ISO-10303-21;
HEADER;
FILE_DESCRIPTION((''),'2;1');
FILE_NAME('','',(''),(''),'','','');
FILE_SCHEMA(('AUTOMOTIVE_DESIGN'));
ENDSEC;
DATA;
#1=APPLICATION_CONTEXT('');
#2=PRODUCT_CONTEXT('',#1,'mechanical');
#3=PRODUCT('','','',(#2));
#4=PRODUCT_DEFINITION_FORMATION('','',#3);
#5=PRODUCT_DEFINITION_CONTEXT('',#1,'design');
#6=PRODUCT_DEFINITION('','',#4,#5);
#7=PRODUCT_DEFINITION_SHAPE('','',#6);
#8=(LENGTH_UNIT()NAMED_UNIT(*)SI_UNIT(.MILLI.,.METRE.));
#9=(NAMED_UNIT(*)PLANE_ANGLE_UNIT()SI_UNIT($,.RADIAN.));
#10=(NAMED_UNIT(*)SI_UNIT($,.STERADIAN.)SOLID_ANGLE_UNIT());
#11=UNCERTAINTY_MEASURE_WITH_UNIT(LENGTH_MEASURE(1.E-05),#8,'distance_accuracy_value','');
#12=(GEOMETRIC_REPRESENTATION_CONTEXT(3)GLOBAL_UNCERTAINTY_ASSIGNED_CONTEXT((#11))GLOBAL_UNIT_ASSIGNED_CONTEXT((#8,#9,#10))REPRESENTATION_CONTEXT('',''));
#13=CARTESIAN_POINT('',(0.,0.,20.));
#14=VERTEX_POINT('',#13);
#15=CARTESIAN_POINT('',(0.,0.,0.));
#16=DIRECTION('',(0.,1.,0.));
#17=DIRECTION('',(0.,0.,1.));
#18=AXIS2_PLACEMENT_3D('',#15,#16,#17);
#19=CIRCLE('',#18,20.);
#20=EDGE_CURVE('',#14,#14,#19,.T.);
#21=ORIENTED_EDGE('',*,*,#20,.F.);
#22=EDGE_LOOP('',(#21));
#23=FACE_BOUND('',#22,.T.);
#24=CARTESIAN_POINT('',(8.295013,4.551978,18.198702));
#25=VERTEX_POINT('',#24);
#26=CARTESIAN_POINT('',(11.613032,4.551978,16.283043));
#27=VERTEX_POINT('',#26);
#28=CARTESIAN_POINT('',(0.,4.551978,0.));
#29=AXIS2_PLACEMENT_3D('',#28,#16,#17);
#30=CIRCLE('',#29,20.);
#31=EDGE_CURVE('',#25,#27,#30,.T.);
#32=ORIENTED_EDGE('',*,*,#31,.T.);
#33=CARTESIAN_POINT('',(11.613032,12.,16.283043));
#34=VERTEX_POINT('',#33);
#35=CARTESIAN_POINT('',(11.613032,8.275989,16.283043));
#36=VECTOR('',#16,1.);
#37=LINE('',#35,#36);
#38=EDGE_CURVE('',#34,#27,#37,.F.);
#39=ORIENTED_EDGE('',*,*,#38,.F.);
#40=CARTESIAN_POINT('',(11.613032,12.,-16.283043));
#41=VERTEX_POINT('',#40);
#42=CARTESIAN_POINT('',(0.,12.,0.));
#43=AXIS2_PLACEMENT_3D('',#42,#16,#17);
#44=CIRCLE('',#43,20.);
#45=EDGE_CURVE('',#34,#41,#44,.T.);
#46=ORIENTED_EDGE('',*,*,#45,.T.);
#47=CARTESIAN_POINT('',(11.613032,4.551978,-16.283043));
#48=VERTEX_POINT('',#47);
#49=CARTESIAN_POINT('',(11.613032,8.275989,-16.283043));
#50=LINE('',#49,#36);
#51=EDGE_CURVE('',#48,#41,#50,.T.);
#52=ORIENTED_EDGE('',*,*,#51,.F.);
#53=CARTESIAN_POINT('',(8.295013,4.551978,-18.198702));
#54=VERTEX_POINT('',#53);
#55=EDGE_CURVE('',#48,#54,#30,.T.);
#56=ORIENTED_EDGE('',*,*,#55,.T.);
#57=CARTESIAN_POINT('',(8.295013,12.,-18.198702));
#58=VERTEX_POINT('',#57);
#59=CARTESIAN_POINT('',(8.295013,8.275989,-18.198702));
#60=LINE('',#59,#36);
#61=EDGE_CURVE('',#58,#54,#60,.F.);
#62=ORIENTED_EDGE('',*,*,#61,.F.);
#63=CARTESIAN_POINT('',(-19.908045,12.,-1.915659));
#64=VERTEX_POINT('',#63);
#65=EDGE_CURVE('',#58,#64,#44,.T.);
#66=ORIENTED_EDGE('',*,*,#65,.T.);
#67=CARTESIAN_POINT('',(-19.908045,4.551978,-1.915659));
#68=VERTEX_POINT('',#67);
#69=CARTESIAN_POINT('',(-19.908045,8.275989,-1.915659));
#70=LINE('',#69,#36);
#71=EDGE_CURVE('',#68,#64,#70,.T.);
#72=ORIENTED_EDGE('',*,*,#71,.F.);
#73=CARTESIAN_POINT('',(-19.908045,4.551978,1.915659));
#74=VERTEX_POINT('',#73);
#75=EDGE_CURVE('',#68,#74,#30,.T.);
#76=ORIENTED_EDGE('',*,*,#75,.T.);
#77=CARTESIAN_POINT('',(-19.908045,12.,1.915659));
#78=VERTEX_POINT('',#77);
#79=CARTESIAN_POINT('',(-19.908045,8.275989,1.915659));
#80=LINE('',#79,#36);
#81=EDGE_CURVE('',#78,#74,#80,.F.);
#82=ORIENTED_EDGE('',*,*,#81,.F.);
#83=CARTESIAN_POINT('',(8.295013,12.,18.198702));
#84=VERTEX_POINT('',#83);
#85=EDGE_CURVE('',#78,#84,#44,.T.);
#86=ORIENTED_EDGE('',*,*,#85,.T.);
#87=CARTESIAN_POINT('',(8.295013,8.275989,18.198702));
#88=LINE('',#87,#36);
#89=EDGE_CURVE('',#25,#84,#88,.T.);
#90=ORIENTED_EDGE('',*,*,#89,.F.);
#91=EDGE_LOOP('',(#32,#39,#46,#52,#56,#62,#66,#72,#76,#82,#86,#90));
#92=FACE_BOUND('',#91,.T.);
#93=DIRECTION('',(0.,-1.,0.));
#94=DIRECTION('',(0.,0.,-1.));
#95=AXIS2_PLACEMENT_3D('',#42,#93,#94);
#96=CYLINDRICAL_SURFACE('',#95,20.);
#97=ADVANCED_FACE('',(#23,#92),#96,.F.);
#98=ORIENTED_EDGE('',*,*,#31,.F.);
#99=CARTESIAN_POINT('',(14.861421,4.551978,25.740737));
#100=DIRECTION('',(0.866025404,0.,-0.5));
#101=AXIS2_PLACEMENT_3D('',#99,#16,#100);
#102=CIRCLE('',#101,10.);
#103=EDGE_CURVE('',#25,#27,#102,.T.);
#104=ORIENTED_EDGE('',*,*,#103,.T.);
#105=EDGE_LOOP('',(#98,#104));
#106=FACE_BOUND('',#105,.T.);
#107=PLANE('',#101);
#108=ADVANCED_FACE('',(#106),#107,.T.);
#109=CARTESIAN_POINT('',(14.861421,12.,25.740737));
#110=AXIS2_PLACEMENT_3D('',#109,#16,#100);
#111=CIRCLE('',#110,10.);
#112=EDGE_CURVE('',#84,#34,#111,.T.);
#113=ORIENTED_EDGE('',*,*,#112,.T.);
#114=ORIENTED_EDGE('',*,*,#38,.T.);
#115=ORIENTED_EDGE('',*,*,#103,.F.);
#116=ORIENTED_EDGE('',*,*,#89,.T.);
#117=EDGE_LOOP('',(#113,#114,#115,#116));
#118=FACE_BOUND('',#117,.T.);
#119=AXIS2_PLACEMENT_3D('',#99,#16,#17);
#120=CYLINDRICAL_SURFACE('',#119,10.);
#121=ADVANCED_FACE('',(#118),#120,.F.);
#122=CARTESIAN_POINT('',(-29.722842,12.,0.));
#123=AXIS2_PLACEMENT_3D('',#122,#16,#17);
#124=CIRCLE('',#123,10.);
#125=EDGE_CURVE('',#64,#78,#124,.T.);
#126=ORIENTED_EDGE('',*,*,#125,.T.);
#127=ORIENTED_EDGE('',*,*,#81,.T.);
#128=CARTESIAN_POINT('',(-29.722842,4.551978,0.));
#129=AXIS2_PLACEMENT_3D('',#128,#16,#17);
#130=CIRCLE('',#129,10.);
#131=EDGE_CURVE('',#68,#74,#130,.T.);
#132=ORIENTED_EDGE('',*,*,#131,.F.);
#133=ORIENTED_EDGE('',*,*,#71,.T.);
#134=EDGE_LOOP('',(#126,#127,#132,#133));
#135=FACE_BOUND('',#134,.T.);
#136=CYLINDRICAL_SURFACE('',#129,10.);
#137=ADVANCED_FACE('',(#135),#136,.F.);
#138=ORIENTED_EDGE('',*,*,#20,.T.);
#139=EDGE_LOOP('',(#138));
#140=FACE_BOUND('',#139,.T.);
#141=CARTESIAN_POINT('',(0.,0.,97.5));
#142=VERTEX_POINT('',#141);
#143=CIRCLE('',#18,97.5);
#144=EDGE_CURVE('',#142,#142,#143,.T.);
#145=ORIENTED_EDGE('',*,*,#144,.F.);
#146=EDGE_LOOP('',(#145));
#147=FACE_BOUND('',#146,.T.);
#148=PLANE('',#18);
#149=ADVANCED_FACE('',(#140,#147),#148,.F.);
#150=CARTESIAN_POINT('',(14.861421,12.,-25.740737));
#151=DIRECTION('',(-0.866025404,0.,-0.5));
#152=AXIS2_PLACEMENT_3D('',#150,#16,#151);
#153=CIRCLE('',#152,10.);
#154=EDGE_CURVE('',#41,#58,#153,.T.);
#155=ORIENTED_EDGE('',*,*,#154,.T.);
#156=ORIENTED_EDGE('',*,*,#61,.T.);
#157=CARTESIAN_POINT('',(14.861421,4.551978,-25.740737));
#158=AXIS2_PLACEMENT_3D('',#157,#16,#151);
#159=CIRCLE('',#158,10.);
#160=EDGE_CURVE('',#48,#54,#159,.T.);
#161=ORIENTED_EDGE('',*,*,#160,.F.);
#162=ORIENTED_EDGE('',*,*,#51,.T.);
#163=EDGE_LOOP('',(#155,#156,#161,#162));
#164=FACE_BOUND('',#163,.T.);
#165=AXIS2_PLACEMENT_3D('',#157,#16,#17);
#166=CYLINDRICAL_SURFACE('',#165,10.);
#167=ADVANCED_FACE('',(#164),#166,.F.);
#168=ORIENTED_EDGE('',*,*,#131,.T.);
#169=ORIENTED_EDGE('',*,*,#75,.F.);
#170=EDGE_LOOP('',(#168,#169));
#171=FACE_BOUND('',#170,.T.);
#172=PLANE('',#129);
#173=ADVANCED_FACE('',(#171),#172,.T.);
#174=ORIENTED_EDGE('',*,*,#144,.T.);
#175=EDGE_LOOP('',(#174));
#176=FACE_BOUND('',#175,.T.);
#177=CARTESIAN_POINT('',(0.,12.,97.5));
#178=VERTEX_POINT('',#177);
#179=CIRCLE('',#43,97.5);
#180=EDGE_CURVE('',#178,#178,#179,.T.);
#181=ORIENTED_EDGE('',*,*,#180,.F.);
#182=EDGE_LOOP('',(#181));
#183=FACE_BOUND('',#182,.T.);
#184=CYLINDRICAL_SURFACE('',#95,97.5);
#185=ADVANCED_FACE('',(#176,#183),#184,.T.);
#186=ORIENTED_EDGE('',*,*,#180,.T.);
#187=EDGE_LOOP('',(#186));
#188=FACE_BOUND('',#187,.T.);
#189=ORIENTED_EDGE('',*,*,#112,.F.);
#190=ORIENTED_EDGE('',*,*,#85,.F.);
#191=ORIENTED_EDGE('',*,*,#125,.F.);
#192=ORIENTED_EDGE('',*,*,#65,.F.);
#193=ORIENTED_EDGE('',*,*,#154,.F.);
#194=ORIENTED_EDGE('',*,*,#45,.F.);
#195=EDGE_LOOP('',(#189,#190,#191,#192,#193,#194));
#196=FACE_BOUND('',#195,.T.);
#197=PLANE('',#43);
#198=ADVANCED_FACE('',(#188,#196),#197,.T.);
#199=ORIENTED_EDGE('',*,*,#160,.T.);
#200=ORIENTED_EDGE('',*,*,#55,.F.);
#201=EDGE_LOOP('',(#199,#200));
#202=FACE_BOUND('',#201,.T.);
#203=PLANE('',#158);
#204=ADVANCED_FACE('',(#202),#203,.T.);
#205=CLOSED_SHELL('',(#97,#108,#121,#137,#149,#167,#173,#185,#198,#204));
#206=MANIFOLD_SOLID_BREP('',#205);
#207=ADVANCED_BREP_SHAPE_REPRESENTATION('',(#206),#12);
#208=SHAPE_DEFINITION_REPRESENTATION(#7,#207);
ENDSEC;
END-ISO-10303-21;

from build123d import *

# Parameters (mm, degrees)
SKETCH1_R           = 97.5
BOSS_EXTRUDE1_DEPTH = 12
SKETCH2_R           = 20
CUT_EXTRUDE1_DEPTH  = 139.407008493
SKETCH3_R           = 10
CUT_EXTRUDE2_DEPTH  = 7.448022219
CIRPATTERN1_COUNT   = 3


with BuildPart() as part:
    # Sketch1 → Boss-Extrude1 (new body)
    with BuildSketch(Plane(origin=(0, 0, 0), x_dir=(1, 0, 0), z_dir=(0, 1, 0))):
        Circle(SKETCH1_R)
    extrude(amount=BOSS_EXTRUDE1_DEPTH)

    # Sketch2 → Cut-Extrude1 (cut, through all)
    with BuildSketch(Plane(origin=(0, 0, 0), x_dir=(1, 0, 0), z_dir=(0, 1, 0))):
        Circle(SKETCH2_R)
    extrude(amount=CUT_EXTRUDE1_DEPTH, mode=Mode.SUBTRACT)

    # Sketch3 → Cut-Extrude2 (cut)
    with BuildSketch(Plane(origin=(0, 12, 0), x_dir=(1, 0, 0), z_dir=(0, 1, 0))):
        with Locations((-29.72284232, 0)):
            Circle(SKETCH3_R)
    cut_extrude2 = extrude(amount=-CUT_EXTRUDE2_DEPTH, mode=Mode.SUBTRACT)

    # CirPattern1: Cut-Extrude2 ×3 about axis
    cirpattern1_axis = Axis((0, 0, 0), (0, 1, 0))
    for i in range(1, CIRPATTERN1_COUNT):
        add(cut_extrude2.rotate(cirpattern1_axis, i * 360 / CIRPATTERN1_COUNT), mode=Mode.SUBTRACT)


solid = part.part
